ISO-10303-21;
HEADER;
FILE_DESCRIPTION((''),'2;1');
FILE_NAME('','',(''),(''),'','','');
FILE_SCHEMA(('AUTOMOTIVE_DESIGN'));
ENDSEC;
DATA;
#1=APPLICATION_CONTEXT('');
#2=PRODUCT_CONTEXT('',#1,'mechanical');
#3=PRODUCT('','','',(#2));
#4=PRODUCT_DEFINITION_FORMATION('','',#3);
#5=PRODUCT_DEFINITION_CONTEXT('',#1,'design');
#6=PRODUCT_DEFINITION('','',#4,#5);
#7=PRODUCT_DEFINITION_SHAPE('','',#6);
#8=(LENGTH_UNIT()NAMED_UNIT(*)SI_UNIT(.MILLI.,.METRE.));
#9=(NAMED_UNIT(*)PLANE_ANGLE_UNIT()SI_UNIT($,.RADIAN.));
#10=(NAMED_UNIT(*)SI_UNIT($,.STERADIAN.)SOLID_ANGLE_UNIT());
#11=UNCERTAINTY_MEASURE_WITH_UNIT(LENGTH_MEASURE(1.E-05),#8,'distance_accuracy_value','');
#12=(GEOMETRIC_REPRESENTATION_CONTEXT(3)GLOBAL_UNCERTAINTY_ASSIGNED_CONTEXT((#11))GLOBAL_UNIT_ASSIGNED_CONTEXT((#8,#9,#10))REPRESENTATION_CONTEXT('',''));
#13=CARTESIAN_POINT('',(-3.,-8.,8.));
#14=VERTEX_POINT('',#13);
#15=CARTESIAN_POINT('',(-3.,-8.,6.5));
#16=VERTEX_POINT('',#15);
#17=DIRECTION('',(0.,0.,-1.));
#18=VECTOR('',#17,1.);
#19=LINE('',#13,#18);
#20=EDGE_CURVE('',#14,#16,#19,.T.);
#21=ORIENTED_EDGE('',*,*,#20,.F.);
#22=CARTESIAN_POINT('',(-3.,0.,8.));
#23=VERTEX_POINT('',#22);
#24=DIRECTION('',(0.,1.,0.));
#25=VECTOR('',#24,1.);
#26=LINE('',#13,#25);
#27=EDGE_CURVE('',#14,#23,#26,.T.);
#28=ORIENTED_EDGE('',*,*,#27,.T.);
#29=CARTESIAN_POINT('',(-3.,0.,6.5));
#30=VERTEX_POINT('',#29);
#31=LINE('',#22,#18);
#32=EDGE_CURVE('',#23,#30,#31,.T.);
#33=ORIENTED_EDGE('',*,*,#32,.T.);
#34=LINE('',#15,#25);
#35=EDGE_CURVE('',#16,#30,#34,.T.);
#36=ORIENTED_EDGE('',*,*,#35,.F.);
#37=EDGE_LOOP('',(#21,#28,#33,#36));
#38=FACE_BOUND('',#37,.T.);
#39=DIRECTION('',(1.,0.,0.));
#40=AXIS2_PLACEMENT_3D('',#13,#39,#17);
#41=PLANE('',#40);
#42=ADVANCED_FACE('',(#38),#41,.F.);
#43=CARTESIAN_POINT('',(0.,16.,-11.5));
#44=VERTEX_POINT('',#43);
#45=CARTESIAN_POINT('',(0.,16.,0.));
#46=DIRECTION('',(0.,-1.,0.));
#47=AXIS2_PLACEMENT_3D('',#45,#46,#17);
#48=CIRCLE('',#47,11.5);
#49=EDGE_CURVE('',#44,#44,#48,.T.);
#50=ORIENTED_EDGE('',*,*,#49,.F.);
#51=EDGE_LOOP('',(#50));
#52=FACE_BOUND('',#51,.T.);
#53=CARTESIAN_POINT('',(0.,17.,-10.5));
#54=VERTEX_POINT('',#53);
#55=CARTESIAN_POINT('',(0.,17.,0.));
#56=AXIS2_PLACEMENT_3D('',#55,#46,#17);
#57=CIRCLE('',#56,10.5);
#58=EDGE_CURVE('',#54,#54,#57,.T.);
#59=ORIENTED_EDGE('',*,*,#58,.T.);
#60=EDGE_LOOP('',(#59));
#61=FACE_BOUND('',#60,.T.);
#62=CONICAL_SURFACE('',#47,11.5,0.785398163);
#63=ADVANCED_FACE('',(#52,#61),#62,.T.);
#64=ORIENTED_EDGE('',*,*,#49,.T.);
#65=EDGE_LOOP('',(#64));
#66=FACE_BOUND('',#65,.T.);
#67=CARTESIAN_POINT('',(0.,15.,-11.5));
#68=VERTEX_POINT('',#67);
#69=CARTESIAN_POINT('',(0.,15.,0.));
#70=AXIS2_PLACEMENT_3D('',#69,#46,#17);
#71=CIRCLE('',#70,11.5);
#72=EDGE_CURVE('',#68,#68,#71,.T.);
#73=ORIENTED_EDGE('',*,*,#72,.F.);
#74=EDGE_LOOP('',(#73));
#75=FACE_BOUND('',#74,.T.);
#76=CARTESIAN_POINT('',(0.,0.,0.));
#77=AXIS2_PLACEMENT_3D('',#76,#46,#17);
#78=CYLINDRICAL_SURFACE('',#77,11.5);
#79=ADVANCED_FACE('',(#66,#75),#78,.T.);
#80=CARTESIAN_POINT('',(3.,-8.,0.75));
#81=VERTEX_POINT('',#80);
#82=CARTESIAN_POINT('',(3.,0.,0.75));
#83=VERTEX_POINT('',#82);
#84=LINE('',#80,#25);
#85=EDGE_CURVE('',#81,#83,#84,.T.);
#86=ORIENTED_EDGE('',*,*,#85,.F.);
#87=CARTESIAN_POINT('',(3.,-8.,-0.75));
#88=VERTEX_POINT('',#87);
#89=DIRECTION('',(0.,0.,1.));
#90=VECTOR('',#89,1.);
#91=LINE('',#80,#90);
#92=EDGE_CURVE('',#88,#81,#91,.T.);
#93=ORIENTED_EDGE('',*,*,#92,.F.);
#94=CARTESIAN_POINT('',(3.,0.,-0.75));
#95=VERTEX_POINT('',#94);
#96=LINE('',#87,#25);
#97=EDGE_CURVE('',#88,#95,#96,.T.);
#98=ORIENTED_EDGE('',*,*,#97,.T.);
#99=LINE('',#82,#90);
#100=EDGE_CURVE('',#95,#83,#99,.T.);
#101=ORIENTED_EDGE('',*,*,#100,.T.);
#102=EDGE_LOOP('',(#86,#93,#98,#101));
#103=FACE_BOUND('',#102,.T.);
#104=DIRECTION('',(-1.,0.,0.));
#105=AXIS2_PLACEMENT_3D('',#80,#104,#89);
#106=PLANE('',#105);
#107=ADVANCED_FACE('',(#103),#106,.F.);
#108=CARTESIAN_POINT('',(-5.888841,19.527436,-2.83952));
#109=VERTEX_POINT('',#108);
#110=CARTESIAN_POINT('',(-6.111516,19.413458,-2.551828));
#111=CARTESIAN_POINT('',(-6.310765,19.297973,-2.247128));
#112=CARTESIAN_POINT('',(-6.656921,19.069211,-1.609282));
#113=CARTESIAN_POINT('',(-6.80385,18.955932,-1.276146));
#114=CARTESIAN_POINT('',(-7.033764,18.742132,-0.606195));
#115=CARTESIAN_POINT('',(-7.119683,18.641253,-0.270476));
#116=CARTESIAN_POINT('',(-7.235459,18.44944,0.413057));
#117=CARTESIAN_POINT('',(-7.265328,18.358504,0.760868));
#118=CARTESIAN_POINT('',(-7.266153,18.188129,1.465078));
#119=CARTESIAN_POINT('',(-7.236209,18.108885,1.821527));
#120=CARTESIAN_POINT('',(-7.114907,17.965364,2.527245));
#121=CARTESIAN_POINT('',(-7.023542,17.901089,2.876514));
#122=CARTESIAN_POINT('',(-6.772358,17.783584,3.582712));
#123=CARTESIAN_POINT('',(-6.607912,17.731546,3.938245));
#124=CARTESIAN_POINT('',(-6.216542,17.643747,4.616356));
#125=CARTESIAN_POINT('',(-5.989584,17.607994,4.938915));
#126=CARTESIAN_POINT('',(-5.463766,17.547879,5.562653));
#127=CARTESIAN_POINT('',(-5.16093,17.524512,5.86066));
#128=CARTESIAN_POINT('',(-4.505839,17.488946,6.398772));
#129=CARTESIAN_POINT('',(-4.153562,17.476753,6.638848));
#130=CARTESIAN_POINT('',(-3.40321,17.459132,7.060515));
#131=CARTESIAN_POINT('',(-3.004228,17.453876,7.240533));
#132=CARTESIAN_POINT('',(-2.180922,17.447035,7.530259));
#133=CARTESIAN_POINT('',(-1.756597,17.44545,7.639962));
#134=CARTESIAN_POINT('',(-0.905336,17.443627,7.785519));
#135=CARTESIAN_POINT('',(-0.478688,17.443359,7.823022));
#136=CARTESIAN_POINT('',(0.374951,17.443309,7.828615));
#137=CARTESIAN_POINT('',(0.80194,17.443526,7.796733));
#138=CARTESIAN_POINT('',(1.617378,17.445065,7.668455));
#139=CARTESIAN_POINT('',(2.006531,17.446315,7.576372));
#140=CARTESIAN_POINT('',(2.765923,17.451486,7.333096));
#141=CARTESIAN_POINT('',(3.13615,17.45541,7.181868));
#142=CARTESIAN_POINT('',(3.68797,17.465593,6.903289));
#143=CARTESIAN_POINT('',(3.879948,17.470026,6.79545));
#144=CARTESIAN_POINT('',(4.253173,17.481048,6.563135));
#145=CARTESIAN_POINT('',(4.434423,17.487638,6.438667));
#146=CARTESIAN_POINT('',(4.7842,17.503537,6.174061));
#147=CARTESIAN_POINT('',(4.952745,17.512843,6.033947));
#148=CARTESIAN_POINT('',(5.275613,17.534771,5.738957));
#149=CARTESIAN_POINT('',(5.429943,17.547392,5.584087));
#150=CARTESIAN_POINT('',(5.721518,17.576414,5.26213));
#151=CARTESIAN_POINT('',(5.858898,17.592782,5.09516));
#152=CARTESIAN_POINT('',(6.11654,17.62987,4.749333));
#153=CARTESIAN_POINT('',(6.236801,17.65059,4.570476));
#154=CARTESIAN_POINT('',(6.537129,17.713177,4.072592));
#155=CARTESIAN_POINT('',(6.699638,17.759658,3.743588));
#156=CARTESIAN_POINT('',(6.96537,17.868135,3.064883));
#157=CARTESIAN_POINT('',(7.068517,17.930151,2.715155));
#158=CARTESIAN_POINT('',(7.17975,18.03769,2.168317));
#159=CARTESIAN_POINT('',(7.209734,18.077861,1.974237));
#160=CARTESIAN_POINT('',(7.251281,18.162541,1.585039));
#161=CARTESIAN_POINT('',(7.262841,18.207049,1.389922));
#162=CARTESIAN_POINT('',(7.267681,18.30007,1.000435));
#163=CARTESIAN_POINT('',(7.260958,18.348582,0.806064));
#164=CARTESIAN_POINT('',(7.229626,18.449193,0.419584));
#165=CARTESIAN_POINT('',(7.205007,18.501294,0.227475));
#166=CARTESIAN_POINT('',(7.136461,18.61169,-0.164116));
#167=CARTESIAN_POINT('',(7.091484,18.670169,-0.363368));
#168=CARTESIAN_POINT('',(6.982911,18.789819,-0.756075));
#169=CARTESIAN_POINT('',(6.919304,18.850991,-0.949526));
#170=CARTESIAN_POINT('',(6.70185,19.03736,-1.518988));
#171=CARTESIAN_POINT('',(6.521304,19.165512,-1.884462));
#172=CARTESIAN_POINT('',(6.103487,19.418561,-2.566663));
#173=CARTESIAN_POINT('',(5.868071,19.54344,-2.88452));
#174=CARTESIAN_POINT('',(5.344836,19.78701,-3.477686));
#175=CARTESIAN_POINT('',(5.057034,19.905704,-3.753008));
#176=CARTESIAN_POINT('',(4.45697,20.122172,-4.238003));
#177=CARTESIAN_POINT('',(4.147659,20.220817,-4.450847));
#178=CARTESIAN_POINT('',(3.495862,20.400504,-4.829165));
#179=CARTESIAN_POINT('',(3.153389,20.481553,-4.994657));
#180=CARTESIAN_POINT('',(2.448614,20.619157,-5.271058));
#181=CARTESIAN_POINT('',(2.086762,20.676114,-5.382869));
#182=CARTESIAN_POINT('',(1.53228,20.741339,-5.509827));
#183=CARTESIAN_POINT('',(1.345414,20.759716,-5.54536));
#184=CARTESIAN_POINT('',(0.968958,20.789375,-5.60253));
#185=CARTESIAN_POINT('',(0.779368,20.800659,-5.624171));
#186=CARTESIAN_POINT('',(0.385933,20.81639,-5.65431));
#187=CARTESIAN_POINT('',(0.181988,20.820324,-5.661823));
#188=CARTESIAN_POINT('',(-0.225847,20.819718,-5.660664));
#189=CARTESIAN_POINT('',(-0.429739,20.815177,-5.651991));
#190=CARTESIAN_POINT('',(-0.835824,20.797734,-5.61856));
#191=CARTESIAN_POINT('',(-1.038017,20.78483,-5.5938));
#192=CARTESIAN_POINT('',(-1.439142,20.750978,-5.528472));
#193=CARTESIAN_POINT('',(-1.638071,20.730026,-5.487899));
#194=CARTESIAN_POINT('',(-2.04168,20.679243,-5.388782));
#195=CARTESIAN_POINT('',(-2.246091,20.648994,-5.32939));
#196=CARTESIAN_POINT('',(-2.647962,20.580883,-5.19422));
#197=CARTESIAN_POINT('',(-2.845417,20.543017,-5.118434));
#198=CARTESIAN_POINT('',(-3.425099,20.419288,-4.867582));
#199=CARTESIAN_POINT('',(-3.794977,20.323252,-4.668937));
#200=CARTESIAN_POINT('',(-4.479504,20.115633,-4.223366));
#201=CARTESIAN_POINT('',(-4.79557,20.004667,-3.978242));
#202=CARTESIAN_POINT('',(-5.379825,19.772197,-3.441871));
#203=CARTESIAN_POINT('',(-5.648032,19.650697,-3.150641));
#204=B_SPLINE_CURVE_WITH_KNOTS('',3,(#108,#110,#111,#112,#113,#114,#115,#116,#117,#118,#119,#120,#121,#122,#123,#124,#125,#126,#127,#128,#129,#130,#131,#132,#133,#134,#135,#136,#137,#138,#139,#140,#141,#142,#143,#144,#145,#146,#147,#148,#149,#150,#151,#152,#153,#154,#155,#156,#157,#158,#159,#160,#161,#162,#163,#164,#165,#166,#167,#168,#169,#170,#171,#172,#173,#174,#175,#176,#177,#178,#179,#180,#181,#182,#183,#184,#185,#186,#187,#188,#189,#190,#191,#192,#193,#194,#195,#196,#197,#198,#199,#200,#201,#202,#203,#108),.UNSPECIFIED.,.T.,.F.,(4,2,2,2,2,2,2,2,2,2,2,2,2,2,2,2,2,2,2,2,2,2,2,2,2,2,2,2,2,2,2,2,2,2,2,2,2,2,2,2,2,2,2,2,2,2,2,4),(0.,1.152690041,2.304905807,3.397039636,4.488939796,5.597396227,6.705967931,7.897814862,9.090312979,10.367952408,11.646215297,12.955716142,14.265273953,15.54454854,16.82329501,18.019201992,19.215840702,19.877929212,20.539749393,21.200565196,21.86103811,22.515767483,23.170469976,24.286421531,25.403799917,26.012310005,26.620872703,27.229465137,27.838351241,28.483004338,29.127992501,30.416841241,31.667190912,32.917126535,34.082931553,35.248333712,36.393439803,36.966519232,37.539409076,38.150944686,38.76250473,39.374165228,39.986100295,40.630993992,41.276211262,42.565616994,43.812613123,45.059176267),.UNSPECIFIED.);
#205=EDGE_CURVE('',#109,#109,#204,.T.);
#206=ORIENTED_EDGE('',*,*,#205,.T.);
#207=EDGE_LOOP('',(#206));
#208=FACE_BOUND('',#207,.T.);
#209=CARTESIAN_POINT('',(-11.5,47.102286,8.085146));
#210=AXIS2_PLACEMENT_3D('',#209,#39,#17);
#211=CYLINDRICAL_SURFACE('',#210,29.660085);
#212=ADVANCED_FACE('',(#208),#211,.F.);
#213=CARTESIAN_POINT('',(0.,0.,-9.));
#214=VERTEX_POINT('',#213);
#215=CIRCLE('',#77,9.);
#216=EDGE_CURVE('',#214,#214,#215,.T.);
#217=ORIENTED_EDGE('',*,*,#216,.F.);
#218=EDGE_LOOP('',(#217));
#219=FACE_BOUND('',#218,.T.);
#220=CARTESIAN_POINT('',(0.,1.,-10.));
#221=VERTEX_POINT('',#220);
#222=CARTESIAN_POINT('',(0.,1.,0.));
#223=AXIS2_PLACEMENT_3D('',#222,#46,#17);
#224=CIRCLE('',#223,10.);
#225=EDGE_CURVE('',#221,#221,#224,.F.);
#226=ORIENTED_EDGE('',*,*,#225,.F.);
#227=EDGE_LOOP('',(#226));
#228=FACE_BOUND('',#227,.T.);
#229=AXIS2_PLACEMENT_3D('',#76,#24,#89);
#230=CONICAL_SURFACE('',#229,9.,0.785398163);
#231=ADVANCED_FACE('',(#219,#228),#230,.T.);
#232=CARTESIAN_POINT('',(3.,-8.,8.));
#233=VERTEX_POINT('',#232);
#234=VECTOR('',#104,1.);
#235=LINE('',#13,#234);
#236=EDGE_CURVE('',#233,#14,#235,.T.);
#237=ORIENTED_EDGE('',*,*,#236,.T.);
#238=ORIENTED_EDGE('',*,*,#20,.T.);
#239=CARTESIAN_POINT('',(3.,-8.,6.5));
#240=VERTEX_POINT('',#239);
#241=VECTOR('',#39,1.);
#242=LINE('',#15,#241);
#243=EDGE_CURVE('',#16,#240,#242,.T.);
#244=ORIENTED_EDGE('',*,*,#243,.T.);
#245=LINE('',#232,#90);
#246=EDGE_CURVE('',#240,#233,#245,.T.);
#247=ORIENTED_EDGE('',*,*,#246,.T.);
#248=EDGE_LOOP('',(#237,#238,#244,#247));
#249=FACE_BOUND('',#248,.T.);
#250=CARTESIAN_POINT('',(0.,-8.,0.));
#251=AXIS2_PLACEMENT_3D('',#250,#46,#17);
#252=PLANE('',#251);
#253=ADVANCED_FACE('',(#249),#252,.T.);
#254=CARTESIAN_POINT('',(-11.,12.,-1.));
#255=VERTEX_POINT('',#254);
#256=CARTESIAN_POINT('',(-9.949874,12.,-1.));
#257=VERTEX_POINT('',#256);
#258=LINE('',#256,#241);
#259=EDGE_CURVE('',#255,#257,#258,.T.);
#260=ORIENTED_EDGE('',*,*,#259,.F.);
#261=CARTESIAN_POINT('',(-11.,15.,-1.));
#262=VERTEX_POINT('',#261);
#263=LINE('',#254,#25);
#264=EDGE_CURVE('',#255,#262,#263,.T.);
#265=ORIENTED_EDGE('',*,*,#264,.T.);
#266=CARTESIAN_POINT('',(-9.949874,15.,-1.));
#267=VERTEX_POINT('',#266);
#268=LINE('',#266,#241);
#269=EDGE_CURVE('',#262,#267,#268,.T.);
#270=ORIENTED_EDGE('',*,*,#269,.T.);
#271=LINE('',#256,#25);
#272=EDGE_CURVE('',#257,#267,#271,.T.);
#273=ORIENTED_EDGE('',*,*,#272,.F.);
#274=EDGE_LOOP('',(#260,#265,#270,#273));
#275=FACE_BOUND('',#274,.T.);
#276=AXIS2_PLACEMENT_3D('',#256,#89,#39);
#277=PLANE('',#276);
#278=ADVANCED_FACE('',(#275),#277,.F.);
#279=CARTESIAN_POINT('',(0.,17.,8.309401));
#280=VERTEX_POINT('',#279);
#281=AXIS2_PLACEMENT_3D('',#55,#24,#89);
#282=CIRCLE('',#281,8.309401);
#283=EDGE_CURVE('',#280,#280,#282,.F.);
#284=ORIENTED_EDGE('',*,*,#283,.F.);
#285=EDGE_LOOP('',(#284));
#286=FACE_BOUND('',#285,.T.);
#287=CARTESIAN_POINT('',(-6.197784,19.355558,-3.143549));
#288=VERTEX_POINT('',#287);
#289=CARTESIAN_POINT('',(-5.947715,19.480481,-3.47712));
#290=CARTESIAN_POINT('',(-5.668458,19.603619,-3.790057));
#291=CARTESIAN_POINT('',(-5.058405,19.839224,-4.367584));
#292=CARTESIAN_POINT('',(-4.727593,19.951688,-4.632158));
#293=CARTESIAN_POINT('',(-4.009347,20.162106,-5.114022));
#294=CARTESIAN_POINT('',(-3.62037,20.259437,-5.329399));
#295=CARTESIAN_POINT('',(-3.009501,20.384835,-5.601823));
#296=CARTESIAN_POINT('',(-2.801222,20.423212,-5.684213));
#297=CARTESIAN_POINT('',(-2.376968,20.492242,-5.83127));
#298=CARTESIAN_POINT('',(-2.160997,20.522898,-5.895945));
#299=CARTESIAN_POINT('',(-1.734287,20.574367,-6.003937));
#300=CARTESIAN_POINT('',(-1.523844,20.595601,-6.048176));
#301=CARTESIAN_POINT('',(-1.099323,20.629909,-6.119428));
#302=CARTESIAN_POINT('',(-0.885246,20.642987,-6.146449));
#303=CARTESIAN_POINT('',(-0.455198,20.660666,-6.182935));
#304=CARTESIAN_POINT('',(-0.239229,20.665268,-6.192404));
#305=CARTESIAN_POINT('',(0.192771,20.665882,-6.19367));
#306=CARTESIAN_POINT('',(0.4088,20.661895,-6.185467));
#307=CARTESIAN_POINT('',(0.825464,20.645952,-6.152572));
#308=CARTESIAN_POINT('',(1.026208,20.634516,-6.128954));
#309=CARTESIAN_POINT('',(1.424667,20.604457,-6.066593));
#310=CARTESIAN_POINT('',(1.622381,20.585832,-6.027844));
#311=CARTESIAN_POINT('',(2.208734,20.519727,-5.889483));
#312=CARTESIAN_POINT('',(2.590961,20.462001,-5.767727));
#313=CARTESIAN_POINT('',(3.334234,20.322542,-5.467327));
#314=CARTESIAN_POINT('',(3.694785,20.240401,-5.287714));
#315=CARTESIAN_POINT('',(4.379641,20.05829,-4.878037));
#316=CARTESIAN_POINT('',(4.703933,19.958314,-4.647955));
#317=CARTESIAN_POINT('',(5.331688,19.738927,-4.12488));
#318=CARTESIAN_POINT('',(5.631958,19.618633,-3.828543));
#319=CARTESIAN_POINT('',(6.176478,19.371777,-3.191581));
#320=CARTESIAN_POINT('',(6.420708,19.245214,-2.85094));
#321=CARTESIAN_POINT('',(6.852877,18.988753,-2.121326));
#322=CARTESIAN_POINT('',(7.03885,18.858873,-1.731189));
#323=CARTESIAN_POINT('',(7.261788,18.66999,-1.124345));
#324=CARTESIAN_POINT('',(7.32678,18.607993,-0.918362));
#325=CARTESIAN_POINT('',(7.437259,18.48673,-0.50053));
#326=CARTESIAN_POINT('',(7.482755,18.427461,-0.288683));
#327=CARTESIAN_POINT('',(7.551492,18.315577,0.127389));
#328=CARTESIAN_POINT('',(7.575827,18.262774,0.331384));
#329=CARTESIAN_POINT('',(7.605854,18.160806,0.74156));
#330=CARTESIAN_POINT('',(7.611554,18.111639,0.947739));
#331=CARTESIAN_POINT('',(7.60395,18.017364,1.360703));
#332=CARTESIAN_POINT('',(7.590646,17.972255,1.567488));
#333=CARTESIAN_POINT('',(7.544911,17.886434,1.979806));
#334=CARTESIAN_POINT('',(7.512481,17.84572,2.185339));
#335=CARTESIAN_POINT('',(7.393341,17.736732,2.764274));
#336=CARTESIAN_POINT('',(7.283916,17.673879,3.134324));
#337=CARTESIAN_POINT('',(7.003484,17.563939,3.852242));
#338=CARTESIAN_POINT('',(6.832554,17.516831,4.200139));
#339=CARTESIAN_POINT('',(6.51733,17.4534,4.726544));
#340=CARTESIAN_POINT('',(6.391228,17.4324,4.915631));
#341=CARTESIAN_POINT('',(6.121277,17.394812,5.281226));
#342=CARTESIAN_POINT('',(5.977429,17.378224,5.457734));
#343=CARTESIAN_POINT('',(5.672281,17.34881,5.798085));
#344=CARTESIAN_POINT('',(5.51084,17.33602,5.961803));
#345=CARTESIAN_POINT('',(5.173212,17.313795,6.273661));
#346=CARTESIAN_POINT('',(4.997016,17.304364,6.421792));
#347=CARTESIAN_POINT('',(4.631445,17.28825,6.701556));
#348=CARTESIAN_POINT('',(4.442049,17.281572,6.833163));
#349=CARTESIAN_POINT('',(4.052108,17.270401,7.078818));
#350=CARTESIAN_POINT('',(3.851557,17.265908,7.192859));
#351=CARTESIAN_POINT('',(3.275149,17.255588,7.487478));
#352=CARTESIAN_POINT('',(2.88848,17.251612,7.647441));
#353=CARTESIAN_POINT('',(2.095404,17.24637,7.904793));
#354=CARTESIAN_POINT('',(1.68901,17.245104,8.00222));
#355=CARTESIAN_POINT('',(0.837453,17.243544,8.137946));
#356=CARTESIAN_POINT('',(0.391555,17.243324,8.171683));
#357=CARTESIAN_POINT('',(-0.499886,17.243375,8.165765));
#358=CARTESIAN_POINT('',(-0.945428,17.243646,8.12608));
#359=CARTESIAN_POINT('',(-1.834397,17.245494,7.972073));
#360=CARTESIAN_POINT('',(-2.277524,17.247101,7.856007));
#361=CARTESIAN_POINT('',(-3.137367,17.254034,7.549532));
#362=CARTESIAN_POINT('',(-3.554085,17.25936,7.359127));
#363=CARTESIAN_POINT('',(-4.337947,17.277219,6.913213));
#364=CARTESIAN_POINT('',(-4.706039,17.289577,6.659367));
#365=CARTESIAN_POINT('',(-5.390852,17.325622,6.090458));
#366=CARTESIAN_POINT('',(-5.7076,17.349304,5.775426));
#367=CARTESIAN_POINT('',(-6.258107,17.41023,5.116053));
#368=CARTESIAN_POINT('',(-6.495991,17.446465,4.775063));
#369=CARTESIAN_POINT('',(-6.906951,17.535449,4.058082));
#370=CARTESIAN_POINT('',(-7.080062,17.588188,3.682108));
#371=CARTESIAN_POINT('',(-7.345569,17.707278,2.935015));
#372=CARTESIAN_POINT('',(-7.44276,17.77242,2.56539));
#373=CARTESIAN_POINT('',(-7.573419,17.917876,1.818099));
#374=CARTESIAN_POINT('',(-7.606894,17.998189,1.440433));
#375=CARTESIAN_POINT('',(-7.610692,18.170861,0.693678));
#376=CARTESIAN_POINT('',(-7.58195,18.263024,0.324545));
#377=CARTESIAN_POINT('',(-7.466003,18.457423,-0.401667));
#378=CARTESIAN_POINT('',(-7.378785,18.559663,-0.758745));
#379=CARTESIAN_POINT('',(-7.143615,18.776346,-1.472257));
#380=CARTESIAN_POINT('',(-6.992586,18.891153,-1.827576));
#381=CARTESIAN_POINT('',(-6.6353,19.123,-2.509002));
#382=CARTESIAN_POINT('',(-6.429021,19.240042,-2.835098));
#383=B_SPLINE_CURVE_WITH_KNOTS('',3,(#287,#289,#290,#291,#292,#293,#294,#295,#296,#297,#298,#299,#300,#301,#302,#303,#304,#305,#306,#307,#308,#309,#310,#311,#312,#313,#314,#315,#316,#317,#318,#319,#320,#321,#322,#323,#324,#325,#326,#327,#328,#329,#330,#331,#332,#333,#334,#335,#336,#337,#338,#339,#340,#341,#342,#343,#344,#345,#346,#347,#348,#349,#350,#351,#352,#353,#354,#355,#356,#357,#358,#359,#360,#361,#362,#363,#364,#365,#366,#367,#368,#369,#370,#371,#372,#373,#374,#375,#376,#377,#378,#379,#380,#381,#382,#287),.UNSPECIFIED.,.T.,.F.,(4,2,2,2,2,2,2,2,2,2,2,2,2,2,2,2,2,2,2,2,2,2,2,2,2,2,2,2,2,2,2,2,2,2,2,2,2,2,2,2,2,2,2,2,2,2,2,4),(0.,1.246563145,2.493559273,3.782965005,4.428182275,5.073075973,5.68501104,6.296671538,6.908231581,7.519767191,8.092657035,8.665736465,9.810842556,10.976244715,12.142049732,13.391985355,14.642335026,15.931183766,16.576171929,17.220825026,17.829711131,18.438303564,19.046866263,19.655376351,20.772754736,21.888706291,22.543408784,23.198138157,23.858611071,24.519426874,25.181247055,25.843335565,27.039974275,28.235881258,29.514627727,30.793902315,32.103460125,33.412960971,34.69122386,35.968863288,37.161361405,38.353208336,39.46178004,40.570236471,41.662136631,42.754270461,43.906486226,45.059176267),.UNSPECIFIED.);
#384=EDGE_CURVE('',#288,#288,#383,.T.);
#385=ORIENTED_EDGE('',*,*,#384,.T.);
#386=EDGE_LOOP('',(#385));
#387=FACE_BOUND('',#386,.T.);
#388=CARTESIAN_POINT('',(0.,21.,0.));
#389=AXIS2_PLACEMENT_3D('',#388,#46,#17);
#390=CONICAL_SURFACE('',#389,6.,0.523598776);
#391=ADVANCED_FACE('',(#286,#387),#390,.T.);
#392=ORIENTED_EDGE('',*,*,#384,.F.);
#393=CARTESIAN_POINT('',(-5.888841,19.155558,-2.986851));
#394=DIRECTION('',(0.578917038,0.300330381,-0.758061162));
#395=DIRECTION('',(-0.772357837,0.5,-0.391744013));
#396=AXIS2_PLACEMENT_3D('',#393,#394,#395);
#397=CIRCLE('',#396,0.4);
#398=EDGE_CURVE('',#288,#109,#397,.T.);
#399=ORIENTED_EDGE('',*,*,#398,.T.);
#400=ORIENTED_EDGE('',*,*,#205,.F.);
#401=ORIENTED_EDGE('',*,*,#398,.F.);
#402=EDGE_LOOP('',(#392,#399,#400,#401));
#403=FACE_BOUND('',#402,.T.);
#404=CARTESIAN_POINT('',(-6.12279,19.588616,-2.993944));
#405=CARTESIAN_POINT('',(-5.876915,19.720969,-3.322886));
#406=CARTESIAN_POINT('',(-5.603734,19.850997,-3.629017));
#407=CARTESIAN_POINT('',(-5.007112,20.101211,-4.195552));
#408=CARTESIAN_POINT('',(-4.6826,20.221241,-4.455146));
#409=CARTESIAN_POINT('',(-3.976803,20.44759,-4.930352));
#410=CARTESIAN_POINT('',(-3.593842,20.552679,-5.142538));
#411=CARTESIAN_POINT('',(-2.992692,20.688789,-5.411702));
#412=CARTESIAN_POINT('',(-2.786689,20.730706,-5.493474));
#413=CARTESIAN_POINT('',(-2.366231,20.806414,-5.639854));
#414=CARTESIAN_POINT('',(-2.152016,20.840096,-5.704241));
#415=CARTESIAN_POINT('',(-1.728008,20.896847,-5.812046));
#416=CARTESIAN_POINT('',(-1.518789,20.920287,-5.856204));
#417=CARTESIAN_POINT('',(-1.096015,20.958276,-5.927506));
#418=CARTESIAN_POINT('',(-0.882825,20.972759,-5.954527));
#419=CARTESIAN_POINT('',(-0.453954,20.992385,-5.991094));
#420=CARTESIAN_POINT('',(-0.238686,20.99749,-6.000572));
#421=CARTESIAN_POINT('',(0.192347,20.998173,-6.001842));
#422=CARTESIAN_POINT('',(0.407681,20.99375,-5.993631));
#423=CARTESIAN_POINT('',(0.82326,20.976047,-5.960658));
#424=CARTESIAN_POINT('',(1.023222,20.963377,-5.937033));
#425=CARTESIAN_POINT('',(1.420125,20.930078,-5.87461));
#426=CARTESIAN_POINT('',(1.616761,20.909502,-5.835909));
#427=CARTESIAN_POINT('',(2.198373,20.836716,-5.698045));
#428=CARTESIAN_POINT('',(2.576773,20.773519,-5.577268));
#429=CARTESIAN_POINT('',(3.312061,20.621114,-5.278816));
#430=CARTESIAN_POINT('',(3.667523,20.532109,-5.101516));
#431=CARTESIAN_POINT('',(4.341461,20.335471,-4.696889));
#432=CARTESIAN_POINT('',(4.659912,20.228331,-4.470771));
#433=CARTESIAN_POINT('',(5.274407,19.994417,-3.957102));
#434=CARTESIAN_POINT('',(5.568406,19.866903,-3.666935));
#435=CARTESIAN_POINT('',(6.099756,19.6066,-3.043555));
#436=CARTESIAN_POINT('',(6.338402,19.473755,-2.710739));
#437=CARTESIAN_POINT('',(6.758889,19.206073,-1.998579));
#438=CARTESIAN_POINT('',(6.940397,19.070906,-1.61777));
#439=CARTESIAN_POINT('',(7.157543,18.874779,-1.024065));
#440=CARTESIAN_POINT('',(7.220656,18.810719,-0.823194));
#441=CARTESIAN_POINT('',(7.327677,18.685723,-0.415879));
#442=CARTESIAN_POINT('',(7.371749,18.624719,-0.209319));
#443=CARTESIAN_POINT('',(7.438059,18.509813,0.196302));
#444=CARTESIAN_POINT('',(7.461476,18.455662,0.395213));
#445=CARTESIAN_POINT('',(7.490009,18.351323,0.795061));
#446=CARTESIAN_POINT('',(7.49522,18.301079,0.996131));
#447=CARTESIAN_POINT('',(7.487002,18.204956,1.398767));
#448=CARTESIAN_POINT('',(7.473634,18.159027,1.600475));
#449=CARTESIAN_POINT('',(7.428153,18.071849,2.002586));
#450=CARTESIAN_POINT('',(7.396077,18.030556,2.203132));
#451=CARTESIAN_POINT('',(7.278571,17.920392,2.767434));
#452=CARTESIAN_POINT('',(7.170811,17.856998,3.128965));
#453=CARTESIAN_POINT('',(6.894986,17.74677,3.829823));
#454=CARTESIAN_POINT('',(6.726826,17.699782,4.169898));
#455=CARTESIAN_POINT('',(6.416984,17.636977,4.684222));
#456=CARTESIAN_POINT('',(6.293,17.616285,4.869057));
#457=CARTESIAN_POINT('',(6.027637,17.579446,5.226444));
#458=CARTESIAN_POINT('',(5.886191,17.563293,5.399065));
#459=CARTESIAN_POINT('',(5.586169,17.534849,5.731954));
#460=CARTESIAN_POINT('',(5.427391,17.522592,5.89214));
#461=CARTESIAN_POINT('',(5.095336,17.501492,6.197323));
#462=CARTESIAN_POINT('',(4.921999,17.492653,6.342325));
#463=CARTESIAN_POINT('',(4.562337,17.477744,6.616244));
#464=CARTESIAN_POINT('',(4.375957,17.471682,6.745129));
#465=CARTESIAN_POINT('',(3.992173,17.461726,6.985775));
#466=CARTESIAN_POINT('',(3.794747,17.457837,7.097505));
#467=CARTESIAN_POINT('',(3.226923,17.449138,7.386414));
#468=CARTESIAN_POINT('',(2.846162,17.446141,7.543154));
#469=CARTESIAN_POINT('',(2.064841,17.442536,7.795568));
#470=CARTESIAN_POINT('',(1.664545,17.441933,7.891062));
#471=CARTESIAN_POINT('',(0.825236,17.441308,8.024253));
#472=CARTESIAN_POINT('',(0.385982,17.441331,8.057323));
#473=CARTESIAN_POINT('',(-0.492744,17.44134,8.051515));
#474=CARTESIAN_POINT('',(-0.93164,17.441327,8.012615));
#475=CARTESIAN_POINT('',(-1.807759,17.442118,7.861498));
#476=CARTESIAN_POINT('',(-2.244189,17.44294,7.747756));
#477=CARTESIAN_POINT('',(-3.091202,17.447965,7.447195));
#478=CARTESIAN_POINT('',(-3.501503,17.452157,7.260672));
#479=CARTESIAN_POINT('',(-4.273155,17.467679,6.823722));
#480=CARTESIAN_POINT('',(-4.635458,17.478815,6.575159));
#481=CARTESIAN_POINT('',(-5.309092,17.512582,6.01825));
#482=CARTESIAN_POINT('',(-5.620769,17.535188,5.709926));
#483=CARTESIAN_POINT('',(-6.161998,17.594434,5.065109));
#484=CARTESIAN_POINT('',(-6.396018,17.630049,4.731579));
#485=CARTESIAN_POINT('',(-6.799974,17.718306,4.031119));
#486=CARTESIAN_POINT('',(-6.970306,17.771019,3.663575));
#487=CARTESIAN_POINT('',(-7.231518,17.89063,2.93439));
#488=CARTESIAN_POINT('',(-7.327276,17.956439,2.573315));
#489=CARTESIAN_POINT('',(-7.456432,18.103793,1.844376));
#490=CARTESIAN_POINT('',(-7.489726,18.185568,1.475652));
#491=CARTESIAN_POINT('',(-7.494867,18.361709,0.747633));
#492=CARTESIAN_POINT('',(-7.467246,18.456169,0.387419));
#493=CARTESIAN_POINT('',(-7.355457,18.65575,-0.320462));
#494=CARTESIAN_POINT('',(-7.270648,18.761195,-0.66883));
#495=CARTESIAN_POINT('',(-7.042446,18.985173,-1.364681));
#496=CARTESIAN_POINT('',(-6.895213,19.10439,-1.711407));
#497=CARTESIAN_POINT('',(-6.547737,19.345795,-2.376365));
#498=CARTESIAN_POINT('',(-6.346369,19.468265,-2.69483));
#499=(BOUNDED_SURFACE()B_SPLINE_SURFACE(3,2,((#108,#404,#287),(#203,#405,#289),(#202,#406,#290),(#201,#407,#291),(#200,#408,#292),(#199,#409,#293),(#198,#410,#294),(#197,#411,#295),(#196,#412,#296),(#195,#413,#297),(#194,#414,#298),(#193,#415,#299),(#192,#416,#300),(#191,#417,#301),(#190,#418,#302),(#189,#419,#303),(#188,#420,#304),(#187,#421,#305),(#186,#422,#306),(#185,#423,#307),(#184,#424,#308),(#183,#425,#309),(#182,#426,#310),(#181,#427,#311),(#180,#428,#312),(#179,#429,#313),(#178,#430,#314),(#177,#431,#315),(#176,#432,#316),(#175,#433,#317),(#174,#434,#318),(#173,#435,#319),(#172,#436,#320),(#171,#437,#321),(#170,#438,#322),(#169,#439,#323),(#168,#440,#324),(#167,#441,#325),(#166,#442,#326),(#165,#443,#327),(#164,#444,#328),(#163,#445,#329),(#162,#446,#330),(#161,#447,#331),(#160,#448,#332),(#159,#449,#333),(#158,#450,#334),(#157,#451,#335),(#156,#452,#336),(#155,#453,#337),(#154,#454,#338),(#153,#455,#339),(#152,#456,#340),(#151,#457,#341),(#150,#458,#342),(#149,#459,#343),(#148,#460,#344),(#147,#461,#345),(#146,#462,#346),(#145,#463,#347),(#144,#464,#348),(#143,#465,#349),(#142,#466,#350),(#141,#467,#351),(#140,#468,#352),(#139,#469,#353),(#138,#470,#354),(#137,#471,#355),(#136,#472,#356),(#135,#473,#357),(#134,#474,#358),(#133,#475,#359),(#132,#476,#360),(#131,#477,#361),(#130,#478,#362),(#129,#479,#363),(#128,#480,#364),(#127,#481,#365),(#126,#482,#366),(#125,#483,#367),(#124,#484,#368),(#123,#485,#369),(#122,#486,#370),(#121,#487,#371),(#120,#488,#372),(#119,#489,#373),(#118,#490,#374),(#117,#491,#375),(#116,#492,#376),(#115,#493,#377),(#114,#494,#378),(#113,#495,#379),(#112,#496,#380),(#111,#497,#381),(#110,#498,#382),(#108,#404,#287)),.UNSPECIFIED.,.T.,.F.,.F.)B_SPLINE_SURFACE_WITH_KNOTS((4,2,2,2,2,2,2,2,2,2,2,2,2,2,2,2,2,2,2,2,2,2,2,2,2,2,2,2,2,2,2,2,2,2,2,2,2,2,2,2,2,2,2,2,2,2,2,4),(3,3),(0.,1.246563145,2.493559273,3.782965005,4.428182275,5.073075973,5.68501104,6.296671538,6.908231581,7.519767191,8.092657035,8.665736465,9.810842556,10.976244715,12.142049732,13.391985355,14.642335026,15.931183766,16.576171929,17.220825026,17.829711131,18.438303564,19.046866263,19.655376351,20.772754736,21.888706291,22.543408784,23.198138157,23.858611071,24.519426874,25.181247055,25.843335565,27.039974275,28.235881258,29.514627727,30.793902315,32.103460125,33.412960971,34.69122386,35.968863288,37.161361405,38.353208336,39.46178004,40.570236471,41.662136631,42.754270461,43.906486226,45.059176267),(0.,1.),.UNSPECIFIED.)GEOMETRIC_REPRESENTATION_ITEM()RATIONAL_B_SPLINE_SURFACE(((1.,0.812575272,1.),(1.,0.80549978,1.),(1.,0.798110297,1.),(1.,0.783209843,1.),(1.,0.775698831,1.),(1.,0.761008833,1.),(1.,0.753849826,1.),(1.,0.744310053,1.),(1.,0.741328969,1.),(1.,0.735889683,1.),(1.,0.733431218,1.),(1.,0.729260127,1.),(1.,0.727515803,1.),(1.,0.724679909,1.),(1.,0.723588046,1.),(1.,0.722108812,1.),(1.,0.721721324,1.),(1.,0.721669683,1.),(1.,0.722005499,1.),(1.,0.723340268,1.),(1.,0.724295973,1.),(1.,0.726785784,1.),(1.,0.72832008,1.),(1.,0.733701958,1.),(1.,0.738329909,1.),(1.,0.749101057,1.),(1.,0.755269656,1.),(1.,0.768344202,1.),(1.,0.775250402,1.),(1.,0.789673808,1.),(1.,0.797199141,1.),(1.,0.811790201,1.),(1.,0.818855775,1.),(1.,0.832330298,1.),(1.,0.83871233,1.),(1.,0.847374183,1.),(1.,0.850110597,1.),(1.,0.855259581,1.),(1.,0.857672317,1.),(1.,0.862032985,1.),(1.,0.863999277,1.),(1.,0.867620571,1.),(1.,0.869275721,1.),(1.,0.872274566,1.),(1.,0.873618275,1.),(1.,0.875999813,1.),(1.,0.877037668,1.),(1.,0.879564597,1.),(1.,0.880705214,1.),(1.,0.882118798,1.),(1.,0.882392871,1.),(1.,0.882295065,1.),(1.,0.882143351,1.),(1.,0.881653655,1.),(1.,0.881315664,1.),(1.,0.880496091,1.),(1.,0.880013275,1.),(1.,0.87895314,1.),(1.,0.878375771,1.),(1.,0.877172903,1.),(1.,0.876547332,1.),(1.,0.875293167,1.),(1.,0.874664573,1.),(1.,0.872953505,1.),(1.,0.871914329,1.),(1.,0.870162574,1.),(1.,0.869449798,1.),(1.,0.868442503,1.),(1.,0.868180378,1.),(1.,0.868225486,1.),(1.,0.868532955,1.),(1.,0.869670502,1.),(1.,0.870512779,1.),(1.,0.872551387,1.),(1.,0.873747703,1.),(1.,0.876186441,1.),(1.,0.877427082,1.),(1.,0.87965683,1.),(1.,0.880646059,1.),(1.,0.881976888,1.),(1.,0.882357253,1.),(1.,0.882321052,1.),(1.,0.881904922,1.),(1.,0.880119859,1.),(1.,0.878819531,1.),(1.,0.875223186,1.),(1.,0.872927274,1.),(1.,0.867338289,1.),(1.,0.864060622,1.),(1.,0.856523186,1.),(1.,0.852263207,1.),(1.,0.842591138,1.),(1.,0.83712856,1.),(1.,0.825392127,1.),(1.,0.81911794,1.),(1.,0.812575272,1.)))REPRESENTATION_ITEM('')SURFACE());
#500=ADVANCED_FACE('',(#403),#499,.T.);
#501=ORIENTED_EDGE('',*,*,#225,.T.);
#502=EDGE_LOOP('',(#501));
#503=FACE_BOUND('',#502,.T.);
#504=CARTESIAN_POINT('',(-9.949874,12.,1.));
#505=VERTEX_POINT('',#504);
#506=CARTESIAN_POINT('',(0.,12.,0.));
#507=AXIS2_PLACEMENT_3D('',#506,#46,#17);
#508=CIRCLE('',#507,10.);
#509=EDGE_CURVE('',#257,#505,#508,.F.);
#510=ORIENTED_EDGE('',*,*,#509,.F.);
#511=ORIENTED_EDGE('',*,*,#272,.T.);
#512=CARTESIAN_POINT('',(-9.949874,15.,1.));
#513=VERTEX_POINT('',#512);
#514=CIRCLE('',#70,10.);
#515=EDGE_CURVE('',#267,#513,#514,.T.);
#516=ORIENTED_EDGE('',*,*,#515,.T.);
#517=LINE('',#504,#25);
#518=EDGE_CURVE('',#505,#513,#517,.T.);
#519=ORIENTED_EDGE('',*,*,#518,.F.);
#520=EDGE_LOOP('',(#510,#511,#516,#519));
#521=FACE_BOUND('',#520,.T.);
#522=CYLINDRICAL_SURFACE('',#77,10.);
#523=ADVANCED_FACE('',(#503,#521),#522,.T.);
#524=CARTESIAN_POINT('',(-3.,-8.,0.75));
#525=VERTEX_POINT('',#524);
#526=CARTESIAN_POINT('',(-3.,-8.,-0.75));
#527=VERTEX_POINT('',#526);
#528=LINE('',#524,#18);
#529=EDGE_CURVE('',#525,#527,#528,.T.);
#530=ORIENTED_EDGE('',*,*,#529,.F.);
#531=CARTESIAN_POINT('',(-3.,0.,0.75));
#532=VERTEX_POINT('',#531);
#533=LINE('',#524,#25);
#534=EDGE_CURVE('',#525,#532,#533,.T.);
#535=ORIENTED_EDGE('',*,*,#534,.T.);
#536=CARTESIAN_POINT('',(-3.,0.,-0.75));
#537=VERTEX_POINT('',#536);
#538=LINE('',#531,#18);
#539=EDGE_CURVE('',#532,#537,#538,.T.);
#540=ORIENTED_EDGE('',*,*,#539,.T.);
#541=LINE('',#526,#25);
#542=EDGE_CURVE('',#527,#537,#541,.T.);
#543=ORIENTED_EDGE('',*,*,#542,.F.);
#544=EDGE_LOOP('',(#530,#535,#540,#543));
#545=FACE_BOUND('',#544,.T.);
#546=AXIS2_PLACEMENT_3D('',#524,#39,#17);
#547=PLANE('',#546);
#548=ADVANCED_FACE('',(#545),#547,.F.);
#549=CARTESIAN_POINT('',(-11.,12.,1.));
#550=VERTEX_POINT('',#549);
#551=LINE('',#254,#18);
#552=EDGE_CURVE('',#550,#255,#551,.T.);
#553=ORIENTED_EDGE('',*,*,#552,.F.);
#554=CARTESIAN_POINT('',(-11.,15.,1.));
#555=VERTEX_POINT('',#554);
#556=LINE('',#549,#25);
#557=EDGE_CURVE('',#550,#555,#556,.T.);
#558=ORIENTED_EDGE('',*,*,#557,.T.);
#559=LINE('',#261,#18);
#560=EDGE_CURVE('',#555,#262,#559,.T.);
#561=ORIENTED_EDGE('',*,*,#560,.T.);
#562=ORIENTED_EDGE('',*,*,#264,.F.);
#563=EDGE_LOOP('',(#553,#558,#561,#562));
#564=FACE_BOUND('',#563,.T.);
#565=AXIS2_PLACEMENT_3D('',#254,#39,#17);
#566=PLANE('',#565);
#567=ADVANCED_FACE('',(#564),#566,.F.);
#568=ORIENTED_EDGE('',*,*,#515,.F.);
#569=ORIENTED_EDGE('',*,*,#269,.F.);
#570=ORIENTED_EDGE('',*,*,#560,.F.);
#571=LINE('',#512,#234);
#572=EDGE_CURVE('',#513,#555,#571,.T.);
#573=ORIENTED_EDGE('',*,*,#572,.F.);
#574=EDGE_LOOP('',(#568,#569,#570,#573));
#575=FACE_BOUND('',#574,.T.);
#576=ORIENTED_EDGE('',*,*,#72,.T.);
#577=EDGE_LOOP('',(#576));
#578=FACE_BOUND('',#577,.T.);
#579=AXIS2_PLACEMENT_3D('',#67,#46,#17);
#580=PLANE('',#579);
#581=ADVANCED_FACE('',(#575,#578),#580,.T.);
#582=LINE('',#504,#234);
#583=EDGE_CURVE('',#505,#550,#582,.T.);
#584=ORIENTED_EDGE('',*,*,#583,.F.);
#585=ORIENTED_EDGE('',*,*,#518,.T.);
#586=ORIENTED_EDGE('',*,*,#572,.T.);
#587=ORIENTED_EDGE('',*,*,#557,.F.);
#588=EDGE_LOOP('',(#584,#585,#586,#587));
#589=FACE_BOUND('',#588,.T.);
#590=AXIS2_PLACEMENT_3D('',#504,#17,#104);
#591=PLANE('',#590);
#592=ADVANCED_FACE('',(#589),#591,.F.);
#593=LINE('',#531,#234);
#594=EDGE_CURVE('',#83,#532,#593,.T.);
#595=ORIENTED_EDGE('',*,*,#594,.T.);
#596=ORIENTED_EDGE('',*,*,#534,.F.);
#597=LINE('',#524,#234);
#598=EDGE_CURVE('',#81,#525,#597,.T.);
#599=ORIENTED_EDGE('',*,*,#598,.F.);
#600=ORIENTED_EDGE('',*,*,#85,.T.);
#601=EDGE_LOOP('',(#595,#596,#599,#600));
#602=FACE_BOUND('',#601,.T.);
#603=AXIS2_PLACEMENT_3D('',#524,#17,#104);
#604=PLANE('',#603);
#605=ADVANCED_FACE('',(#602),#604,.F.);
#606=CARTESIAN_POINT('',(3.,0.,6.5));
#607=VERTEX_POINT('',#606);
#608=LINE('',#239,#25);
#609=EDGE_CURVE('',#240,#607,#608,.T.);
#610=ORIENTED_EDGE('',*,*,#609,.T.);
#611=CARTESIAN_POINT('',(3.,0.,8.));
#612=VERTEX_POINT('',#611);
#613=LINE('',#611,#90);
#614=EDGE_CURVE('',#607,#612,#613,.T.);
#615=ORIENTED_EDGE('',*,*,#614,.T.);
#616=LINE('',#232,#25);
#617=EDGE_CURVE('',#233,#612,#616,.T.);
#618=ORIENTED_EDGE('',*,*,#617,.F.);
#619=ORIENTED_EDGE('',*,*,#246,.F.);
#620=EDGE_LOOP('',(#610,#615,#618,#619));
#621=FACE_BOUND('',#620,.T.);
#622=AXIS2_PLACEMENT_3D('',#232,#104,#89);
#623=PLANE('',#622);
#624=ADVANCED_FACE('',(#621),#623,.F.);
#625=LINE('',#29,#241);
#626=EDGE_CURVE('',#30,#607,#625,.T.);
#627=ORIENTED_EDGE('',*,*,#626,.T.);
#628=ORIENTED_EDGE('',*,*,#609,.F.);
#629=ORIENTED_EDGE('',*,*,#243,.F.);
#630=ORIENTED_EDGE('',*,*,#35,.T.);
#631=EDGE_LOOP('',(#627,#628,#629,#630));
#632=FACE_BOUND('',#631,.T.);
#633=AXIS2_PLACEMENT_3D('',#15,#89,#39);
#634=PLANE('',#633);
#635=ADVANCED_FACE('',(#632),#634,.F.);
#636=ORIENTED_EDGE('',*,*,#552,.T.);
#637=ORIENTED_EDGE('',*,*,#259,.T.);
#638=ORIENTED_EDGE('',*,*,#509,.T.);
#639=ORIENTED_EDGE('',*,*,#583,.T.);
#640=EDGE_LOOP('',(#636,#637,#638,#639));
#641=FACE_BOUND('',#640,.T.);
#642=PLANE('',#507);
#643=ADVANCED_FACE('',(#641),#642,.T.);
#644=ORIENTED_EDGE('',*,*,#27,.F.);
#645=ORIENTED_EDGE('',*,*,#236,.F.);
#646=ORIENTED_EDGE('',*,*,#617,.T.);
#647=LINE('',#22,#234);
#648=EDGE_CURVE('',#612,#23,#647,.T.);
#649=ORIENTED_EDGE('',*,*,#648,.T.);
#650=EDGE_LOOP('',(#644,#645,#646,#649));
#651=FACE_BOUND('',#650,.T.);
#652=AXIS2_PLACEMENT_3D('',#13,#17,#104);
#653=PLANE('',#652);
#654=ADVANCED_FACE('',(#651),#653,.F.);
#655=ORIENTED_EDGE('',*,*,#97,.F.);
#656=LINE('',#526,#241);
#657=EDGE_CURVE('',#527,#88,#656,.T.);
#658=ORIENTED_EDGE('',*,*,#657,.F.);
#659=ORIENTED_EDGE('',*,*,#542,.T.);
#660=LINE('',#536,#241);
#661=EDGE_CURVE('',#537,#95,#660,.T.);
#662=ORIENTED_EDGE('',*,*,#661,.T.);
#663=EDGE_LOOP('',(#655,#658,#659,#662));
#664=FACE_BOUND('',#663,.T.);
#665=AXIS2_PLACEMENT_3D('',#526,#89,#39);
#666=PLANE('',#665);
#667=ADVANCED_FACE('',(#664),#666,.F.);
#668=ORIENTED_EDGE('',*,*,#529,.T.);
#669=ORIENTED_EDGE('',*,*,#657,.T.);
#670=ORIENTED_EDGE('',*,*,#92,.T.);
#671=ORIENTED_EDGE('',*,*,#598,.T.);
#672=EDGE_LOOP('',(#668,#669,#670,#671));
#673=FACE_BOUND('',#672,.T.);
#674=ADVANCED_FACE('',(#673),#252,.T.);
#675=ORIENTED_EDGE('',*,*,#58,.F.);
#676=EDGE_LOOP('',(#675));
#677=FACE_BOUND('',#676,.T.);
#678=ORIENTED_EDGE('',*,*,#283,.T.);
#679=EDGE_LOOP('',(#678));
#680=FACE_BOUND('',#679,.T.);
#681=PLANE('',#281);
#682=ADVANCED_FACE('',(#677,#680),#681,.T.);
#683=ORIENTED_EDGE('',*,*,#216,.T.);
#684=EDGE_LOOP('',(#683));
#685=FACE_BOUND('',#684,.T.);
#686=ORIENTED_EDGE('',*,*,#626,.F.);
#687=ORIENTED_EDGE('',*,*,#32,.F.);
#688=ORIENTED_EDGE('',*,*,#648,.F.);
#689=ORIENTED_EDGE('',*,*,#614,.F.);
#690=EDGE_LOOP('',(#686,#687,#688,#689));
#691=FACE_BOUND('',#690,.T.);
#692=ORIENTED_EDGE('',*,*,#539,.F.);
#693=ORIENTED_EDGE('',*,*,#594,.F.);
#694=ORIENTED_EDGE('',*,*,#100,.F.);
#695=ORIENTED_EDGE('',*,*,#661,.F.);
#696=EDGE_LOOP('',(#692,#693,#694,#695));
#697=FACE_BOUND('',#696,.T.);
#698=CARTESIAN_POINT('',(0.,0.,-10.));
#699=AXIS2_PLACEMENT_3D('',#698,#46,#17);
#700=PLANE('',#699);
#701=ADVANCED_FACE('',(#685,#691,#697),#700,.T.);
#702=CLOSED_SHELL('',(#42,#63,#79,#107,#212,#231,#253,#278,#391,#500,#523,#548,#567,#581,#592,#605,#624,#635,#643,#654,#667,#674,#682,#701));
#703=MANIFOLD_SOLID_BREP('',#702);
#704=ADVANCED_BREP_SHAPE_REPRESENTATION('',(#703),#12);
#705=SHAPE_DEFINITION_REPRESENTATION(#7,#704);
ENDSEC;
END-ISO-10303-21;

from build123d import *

# Parameters (mm, degrees)
SKETCH3_R               = 9
BOSS_EXTRUDE1_DEPTH     = 4
CHAMFER1_SIZE           = 5.196152423
CHAMFER1_SIZE_2         = 3
CUT_EXTRUDE2_DEPTH      = 27.561249971
CUT_EXTRUDE2_DEPTH_BACK = 27.561249971
FILLET1_R               = 0.4
SKETCH6_W               = 1.050125629
SKETCH6_H               = 2
BOSS_EXTRUDE2_DEPTH     = 3
SKETCH7_W               = 6
SKETCH7_H               = 1.5
BOSS_EXTRUDE3_DEPTH     = 8
CHAMFER2_SIZE           = 1


with BuildPart() as part:
    # Sketch2 → Revolve1 (revolve)
    with BuildSketch(Plane(origin=(0, 0, 0), x_dir=(0, 0, -1), z_dir=(1, 0, 0))):
        Polygon((0, 0), (0, 17), (10.5, 17), (11.5, 16), (11.5, 15), (10, 15), (10, 0), align=None)
    revolve(axis=Axis((0, 0, 0), (0, 1, 0)))

    # Sketch3 → Boss-Extrude1 (add)
    with BuildSketch(Plane(origin=(0, 17, 0), x_dir=(1, 0, 0), z_dir=(0, 1, 0))):
        with Locations(Location((0, 0, 0), (0, 0, 270))):
            Circle(SKETCH3_R)
    extrude(amount=BOSS_EXTRUDE1_DEPTH)

    # Chamfer1
    # the kernel refuses this chamfer: 5.196152423, 3 mm, written as the material it takes off along each edge
    with BuildSketch(Plane(origin=(0, 21, 0), x_dir=(0, 0, 1), z_dir=(-1, 0, 0))) as chamfer1_piece_1_section:
        Polygon((9, -CHAMFER1_SIZE), (9 - CHAMFER1_SIZE_2, 0), (9, 0), align=None)
    chamfer1_piece_1 = revolve(axis=Axis((0, 21, 0), (0, 1, 0)), mode=Mode.PRIVATE)
    chamfer1_piece_1 = split(chamfer1_piece_1, bisect_by=Plane(origin=(0, 17, -7.167132971), z_dir=(0, 1, 0)), keep=Keep.TOP, mode=Mode.PRIVATE)
    add(chamfer1_piece_1, mode=Mode.SUBTRACT)

    # Sketch5 → Cut-Extrude2 (cut, two sides: drawn at the far end of the back side and taken through both)
    with BuildSketch(Plane(origin=(0, 0, 0), x_dir=(0, 0, -1), z_dir=(1, 0, 0)).offset(-CUT_EXTRUDE2_DEPTH_BACK)):
        with BuildLine():
            Line((6, 21), (-6, 21))
            Line((-6, 21), (-8.085535149, 17.44220036))
            ThreePointArc((-8.085535149, 17.44220036), (-0.821567104, 18.345354686), (6, 21))
        make_face()
    extrude(amount=CUT_EXTRUDE2_DEPTH + CUT_EXTRUDE2_DEPTH_BACK, mode=Mode.SUBTRACT)

    # Fillet1
    fillet1_edges = [part.edges().sort_by_distance(p)[0] for p in [
        (-9.3e-08, 21, -6),
    ]]
    fillet(fillet1_edges, radius=FILLET1_R)

    # Sketch6 → Boss-Extrude2 (add)
    with BuildSketch(Plane.XZ.offset(-15)):
        with Locations((-10.474937185, 0)):
            Rectangle(SKETCH6_W, SKETCH6_H)
    extrude(amount=BOSS_EXTRUDE2_DEPTH)

    # Sketch7 → Boss-Extrude3 (add)
    with BuildSketch(Plane.XZ):
        Rectangle(SKETCH7_W, SKETCH7_H)
        with Locations((0, 7.25)):
            Rectangle(SKETCH7_W, SKETCH7_H)
    extrude(amount=BOSS_EXTRUDE3_DEPTH)

    # Chamfer2
    chamfer2_edges = [part.edges().sort_by_distance(p)[0] for p in [
        (0, 0, 10),
    ]]
    chamfer(chamfer2_edges, length=CHAMFER2_SIZE)


solid = part.part
